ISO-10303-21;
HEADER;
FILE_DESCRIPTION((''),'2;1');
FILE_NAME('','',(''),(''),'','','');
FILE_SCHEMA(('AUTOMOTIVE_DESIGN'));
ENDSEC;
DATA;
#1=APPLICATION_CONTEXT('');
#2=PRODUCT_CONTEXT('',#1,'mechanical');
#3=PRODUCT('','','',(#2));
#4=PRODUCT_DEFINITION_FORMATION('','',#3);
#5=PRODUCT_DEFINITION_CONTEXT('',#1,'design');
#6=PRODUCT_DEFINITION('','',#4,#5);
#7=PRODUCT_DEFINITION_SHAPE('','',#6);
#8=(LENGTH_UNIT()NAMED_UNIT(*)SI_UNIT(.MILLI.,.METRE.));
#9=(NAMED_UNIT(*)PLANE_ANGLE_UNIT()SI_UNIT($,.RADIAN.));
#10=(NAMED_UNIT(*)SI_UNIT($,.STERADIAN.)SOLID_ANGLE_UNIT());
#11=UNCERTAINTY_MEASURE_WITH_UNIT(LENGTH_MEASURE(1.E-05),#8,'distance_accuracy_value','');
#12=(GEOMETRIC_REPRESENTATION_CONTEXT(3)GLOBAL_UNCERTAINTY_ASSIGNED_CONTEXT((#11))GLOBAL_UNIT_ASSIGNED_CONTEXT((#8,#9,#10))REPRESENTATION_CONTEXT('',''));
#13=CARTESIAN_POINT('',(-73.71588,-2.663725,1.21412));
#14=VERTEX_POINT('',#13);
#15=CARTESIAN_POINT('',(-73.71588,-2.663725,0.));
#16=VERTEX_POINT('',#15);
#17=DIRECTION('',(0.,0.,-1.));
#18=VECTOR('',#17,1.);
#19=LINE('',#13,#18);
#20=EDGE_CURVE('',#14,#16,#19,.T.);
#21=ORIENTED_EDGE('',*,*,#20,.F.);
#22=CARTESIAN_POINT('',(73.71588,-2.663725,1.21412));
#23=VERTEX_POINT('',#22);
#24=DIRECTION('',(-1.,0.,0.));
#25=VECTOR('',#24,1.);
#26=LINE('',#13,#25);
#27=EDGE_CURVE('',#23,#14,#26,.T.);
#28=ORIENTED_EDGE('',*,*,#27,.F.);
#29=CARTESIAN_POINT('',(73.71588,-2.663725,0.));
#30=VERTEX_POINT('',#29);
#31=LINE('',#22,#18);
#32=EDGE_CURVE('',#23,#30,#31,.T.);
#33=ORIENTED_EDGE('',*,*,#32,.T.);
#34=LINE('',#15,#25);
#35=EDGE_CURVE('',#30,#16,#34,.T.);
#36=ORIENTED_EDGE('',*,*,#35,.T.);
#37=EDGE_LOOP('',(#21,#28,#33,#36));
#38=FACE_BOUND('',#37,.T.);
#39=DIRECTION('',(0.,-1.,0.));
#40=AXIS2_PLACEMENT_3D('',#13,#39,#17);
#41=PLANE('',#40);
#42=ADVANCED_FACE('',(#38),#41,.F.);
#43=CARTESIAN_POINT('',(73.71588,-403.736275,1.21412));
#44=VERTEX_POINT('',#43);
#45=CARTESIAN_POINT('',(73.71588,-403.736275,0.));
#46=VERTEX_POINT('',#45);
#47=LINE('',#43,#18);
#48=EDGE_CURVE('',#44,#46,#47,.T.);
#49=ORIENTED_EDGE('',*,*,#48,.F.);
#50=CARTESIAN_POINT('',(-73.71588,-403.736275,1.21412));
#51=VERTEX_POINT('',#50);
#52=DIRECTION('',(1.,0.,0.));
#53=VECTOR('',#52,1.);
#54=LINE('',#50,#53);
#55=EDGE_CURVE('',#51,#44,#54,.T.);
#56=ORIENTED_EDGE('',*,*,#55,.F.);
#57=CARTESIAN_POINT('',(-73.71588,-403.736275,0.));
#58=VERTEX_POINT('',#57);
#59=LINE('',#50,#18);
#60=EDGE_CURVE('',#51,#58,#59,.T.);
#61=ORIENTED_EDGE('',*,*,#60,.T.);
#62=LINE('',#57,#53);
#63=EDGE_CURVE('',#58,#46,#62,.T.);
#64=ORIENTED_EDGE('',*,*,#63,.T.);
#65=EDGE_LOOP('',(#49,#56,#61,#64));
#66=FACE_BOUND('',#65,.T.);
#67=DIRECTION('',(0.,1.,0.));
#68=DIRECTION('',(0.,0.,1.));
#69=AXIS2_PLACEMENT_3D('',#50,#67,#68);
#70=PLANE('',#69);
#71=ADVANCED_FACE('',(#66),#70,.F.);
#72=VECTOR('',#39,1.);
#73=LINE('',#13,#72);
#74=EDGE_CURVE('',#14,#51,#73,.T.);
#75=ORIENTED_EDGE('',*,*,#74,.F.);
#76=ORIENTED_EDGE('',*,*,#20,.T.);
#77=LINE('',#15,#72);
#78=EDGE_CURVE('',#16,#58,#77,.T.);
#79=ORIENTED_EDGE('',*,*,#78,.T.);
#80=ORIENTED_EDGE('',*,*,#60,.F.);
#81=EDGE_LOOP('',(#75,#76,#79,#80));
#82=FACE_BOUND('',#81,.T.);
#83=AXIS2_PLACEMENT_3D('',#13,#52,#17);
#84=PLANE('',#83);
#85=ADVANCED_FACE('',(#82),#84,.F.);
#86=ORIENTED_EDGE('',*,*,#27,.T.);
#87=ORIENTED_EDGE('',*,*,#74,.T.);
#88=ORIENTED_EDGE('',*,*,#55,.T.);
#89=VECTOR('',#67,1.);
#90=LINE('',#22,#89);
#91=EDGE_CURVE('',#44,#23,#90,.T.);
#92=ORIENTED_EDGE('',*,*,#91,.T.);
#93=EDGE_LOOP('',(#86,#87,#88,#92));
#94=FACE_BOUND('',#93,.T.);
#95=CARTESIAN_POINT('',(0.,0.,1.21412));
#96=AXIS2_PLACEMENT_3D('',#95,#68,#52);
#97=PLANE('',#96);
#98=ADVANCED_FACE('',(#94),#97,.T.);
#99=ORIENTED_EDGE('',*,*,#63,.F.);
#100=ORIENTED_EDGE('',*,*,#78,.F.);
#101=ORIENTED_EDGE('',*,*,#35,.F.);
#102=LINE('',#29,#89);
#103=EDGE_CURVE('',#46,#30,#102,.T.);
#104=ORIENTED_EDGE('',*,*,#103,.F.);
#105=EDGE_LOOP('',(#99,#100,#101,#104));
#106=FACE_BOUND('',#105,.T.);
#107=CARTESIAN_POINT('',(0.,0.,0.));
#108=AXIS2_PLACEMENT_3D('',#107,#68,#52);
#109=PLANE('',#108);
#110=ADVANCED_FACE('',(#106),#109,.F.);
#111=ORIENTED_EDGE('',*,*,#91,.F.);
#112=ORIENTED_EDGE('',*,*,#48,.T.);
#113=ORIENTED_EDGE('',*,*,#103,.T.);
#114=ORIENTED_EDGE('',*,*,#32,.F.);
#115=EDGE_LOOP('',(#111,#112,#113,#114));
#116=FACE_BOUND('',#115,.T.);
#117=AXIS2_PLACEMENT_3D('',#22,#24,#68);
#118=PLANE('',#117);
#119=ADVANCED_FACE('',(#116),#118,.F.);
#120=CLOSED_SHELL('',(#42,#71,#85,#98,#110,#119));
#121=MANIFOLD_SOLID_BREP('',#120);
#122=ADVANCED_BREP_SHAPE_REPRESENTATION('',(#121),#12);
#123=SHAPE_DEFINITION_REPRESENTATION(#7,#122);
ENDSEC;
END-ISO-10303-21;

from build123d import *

# Parameters (mm, degrees)
SKETCH2_W          = 147.43176
SKETCH2_H          = 401.072549756
BASE_FLANGE1_DEPTH = 1.21412


# Sheet-metal steps are written as plain solids
with BuildPart() as part:
    # Sketch2 → Base-Flange1 (new body)
    with BuildSketch(Plane.XY):
        with Locations((0, -203.2)):
            Rectangle(SKETCH2_W, SKETCH2_H)
    extrude(amount=BASE_FLANGE1_DEPTH)


solid = part.part
